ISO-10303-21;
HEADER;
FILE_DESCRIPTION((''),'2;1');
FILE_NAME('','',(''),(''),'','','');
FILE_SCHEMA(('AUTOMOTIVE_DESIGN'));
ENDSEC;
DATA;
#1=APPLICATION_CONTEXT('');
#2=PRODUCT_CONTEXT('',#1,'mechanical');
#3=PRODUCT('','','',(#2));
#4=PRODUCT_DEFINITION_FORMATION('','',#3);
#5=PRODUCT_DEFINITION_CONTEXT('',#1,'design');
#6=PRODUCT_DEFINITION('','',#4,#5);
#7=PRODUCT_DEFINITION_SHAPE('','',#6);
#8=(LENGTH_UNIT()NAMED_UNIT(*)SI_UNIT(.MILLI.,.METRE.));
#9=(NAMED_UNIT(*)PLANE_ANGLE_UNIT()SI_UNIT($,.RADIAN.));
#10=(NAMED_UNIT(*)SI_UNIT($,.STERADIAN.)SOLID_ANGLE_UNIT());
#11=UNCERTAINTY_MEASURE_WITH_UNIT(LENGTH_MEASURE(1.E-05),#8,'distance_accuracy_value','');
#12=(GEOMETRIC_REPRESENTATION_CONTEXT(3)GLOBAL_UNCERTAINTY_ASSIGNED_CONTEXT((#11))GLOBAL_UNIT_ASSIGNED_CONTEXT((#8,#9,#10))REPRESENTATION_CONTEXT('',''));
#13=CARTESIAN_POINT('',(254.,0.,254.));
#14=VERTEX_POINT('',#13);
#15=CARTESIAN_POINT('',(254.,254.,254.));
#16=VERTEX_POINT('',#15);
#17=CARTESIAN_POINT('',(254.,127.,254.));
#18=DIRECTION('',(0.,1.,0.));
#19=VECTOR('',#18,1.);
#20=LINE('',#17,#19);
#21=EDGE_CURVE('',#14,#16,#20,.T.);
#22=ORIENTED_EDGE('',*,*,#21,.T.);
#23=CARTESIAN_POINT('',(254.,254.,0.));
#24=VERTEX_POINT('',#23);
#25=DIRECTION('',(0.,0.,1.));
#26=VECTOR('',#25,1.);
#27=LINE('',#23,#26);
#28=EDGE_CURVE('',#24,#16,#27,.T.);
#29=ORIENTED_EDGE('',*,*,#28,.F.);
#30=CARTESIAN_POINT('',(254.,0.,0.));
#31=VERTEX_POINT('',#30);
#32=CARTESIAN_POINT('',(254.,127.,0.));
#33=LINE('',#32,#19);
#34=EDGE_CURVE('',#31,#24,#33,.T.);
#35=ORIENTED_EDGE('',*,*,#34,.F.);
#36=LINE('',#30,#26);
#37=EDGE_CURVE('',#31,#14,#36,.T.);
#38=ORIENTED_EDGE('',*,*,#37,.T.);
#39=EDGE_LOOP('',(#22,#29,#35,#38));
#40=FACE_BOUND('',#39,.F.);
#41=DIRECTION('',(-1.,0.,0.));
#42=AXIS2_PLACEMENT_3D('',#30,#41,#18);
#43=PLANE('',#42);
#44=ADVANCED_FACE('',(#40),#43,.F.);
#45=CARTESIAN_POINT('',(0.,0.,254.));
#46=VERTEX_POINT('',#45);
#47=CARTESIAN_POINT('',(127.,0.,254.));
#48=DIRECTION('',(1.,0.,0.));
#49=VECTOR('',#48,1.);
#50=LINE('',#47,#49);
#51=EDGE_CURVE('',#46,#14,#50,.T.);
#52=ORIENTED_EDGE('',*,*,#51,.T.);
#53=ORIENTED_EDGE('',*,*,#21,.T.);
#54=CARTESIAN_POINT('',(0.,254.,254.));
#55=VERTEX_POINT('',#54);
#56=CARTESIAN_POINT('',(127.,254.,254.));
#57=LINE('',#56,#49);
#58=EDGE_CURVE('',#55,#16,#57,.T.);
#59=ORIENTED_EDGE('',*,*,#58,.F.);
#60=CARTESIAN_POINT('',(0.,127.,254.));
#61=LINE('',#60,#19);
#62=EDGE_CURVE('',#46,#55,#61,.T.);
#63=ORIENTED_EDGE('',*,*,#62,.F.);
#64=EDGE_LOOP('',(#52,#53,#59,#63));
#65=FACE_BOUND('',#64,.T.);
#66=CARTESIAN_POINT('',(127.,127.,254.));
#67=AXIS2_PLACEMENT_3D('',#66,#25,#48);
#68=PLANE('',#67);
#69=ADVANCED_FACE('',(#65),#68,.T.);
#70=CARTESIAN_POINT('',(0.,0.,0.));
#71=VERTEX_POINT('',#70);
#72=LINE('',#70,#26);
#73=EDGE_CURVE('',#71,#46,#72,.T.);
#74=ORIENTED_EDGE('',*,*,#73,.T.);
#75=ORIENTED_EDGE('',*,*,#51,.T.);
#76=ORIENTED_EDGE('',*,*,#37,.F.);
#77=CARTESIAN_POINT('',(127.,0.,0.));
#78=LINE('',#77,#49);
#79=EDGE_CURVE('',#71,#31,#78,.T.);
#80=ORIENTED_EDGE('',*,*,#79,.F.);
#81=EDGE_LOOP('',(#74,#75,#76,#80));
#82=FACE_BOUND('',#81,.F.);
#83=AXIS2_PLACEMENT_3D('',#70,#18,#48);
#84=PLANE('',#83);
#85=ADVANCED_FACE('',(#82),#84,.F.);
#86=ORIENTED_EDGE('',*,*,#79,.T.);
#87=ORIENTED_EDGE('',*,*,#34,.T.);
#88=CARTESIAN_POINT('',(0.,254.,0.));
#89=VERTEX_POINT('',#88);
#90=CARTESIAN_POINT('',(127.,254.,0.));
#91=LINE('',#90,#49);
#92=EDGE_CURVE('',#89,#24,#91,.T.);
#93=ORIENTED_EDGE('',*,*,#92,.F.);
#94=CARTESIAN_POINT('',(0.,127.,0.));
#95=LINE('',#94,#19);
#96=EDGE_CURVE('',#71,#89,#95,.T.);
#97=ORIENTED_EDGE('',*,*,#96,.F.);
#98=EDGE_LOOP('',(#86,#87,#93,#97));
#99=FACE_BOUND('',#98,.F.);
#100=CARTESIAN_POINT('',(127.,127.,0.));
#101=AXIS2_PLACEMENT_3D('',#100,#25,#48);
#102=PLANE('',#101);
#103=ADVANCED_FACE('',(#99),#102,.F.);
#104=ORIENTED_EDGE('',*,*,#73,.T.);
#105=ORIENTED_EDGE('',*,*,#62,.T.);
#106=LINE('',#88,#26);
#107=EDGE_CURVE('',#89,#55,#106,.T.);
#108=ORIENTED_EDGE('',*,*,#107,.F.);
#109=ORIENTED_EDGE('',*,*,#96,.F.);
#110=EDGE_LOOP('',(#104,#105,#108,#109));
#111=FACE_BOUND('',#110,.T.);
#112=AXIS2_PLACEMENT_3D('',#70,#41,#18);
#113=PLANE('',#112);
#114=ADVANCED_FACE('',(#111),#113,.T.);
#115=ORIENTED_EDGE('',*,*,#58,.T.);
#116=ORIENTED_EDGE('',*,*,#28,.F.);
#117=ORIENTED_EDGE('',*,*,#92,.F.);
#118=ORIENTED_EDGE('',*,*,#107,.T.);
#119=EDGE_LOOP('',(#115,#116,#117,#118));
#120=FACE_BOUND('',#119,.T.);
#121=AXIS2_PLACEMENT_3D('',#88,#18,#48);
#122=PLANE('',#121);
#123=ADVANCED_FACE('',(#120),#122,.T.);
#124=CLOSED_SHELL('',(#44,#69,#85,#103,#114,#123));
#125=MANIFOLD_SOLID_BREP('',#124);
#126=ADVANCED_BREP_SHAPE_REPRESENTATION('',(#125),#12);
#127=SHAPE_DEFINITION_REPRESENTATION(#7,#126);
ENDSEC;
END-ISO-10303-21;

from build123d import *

# Parameters (mm, degrees)
F1_W     = 254
F1_H     = 254
F2_DEPTH = 254


# Not quite as in the source:
# - a variable given as a bare number and used for a length is read in inches; the dataset says mm whatever the document's units were


with BuildPart() as f2:
    # F1 (on Top) → F2 (new body)
    with BuildSketch(Plane.XY):
        with Locations((127, 127)):
            Rectangle(F1_W, F1_H)
    extrude(amount=F2_DEPTH)


solid = f2.part
